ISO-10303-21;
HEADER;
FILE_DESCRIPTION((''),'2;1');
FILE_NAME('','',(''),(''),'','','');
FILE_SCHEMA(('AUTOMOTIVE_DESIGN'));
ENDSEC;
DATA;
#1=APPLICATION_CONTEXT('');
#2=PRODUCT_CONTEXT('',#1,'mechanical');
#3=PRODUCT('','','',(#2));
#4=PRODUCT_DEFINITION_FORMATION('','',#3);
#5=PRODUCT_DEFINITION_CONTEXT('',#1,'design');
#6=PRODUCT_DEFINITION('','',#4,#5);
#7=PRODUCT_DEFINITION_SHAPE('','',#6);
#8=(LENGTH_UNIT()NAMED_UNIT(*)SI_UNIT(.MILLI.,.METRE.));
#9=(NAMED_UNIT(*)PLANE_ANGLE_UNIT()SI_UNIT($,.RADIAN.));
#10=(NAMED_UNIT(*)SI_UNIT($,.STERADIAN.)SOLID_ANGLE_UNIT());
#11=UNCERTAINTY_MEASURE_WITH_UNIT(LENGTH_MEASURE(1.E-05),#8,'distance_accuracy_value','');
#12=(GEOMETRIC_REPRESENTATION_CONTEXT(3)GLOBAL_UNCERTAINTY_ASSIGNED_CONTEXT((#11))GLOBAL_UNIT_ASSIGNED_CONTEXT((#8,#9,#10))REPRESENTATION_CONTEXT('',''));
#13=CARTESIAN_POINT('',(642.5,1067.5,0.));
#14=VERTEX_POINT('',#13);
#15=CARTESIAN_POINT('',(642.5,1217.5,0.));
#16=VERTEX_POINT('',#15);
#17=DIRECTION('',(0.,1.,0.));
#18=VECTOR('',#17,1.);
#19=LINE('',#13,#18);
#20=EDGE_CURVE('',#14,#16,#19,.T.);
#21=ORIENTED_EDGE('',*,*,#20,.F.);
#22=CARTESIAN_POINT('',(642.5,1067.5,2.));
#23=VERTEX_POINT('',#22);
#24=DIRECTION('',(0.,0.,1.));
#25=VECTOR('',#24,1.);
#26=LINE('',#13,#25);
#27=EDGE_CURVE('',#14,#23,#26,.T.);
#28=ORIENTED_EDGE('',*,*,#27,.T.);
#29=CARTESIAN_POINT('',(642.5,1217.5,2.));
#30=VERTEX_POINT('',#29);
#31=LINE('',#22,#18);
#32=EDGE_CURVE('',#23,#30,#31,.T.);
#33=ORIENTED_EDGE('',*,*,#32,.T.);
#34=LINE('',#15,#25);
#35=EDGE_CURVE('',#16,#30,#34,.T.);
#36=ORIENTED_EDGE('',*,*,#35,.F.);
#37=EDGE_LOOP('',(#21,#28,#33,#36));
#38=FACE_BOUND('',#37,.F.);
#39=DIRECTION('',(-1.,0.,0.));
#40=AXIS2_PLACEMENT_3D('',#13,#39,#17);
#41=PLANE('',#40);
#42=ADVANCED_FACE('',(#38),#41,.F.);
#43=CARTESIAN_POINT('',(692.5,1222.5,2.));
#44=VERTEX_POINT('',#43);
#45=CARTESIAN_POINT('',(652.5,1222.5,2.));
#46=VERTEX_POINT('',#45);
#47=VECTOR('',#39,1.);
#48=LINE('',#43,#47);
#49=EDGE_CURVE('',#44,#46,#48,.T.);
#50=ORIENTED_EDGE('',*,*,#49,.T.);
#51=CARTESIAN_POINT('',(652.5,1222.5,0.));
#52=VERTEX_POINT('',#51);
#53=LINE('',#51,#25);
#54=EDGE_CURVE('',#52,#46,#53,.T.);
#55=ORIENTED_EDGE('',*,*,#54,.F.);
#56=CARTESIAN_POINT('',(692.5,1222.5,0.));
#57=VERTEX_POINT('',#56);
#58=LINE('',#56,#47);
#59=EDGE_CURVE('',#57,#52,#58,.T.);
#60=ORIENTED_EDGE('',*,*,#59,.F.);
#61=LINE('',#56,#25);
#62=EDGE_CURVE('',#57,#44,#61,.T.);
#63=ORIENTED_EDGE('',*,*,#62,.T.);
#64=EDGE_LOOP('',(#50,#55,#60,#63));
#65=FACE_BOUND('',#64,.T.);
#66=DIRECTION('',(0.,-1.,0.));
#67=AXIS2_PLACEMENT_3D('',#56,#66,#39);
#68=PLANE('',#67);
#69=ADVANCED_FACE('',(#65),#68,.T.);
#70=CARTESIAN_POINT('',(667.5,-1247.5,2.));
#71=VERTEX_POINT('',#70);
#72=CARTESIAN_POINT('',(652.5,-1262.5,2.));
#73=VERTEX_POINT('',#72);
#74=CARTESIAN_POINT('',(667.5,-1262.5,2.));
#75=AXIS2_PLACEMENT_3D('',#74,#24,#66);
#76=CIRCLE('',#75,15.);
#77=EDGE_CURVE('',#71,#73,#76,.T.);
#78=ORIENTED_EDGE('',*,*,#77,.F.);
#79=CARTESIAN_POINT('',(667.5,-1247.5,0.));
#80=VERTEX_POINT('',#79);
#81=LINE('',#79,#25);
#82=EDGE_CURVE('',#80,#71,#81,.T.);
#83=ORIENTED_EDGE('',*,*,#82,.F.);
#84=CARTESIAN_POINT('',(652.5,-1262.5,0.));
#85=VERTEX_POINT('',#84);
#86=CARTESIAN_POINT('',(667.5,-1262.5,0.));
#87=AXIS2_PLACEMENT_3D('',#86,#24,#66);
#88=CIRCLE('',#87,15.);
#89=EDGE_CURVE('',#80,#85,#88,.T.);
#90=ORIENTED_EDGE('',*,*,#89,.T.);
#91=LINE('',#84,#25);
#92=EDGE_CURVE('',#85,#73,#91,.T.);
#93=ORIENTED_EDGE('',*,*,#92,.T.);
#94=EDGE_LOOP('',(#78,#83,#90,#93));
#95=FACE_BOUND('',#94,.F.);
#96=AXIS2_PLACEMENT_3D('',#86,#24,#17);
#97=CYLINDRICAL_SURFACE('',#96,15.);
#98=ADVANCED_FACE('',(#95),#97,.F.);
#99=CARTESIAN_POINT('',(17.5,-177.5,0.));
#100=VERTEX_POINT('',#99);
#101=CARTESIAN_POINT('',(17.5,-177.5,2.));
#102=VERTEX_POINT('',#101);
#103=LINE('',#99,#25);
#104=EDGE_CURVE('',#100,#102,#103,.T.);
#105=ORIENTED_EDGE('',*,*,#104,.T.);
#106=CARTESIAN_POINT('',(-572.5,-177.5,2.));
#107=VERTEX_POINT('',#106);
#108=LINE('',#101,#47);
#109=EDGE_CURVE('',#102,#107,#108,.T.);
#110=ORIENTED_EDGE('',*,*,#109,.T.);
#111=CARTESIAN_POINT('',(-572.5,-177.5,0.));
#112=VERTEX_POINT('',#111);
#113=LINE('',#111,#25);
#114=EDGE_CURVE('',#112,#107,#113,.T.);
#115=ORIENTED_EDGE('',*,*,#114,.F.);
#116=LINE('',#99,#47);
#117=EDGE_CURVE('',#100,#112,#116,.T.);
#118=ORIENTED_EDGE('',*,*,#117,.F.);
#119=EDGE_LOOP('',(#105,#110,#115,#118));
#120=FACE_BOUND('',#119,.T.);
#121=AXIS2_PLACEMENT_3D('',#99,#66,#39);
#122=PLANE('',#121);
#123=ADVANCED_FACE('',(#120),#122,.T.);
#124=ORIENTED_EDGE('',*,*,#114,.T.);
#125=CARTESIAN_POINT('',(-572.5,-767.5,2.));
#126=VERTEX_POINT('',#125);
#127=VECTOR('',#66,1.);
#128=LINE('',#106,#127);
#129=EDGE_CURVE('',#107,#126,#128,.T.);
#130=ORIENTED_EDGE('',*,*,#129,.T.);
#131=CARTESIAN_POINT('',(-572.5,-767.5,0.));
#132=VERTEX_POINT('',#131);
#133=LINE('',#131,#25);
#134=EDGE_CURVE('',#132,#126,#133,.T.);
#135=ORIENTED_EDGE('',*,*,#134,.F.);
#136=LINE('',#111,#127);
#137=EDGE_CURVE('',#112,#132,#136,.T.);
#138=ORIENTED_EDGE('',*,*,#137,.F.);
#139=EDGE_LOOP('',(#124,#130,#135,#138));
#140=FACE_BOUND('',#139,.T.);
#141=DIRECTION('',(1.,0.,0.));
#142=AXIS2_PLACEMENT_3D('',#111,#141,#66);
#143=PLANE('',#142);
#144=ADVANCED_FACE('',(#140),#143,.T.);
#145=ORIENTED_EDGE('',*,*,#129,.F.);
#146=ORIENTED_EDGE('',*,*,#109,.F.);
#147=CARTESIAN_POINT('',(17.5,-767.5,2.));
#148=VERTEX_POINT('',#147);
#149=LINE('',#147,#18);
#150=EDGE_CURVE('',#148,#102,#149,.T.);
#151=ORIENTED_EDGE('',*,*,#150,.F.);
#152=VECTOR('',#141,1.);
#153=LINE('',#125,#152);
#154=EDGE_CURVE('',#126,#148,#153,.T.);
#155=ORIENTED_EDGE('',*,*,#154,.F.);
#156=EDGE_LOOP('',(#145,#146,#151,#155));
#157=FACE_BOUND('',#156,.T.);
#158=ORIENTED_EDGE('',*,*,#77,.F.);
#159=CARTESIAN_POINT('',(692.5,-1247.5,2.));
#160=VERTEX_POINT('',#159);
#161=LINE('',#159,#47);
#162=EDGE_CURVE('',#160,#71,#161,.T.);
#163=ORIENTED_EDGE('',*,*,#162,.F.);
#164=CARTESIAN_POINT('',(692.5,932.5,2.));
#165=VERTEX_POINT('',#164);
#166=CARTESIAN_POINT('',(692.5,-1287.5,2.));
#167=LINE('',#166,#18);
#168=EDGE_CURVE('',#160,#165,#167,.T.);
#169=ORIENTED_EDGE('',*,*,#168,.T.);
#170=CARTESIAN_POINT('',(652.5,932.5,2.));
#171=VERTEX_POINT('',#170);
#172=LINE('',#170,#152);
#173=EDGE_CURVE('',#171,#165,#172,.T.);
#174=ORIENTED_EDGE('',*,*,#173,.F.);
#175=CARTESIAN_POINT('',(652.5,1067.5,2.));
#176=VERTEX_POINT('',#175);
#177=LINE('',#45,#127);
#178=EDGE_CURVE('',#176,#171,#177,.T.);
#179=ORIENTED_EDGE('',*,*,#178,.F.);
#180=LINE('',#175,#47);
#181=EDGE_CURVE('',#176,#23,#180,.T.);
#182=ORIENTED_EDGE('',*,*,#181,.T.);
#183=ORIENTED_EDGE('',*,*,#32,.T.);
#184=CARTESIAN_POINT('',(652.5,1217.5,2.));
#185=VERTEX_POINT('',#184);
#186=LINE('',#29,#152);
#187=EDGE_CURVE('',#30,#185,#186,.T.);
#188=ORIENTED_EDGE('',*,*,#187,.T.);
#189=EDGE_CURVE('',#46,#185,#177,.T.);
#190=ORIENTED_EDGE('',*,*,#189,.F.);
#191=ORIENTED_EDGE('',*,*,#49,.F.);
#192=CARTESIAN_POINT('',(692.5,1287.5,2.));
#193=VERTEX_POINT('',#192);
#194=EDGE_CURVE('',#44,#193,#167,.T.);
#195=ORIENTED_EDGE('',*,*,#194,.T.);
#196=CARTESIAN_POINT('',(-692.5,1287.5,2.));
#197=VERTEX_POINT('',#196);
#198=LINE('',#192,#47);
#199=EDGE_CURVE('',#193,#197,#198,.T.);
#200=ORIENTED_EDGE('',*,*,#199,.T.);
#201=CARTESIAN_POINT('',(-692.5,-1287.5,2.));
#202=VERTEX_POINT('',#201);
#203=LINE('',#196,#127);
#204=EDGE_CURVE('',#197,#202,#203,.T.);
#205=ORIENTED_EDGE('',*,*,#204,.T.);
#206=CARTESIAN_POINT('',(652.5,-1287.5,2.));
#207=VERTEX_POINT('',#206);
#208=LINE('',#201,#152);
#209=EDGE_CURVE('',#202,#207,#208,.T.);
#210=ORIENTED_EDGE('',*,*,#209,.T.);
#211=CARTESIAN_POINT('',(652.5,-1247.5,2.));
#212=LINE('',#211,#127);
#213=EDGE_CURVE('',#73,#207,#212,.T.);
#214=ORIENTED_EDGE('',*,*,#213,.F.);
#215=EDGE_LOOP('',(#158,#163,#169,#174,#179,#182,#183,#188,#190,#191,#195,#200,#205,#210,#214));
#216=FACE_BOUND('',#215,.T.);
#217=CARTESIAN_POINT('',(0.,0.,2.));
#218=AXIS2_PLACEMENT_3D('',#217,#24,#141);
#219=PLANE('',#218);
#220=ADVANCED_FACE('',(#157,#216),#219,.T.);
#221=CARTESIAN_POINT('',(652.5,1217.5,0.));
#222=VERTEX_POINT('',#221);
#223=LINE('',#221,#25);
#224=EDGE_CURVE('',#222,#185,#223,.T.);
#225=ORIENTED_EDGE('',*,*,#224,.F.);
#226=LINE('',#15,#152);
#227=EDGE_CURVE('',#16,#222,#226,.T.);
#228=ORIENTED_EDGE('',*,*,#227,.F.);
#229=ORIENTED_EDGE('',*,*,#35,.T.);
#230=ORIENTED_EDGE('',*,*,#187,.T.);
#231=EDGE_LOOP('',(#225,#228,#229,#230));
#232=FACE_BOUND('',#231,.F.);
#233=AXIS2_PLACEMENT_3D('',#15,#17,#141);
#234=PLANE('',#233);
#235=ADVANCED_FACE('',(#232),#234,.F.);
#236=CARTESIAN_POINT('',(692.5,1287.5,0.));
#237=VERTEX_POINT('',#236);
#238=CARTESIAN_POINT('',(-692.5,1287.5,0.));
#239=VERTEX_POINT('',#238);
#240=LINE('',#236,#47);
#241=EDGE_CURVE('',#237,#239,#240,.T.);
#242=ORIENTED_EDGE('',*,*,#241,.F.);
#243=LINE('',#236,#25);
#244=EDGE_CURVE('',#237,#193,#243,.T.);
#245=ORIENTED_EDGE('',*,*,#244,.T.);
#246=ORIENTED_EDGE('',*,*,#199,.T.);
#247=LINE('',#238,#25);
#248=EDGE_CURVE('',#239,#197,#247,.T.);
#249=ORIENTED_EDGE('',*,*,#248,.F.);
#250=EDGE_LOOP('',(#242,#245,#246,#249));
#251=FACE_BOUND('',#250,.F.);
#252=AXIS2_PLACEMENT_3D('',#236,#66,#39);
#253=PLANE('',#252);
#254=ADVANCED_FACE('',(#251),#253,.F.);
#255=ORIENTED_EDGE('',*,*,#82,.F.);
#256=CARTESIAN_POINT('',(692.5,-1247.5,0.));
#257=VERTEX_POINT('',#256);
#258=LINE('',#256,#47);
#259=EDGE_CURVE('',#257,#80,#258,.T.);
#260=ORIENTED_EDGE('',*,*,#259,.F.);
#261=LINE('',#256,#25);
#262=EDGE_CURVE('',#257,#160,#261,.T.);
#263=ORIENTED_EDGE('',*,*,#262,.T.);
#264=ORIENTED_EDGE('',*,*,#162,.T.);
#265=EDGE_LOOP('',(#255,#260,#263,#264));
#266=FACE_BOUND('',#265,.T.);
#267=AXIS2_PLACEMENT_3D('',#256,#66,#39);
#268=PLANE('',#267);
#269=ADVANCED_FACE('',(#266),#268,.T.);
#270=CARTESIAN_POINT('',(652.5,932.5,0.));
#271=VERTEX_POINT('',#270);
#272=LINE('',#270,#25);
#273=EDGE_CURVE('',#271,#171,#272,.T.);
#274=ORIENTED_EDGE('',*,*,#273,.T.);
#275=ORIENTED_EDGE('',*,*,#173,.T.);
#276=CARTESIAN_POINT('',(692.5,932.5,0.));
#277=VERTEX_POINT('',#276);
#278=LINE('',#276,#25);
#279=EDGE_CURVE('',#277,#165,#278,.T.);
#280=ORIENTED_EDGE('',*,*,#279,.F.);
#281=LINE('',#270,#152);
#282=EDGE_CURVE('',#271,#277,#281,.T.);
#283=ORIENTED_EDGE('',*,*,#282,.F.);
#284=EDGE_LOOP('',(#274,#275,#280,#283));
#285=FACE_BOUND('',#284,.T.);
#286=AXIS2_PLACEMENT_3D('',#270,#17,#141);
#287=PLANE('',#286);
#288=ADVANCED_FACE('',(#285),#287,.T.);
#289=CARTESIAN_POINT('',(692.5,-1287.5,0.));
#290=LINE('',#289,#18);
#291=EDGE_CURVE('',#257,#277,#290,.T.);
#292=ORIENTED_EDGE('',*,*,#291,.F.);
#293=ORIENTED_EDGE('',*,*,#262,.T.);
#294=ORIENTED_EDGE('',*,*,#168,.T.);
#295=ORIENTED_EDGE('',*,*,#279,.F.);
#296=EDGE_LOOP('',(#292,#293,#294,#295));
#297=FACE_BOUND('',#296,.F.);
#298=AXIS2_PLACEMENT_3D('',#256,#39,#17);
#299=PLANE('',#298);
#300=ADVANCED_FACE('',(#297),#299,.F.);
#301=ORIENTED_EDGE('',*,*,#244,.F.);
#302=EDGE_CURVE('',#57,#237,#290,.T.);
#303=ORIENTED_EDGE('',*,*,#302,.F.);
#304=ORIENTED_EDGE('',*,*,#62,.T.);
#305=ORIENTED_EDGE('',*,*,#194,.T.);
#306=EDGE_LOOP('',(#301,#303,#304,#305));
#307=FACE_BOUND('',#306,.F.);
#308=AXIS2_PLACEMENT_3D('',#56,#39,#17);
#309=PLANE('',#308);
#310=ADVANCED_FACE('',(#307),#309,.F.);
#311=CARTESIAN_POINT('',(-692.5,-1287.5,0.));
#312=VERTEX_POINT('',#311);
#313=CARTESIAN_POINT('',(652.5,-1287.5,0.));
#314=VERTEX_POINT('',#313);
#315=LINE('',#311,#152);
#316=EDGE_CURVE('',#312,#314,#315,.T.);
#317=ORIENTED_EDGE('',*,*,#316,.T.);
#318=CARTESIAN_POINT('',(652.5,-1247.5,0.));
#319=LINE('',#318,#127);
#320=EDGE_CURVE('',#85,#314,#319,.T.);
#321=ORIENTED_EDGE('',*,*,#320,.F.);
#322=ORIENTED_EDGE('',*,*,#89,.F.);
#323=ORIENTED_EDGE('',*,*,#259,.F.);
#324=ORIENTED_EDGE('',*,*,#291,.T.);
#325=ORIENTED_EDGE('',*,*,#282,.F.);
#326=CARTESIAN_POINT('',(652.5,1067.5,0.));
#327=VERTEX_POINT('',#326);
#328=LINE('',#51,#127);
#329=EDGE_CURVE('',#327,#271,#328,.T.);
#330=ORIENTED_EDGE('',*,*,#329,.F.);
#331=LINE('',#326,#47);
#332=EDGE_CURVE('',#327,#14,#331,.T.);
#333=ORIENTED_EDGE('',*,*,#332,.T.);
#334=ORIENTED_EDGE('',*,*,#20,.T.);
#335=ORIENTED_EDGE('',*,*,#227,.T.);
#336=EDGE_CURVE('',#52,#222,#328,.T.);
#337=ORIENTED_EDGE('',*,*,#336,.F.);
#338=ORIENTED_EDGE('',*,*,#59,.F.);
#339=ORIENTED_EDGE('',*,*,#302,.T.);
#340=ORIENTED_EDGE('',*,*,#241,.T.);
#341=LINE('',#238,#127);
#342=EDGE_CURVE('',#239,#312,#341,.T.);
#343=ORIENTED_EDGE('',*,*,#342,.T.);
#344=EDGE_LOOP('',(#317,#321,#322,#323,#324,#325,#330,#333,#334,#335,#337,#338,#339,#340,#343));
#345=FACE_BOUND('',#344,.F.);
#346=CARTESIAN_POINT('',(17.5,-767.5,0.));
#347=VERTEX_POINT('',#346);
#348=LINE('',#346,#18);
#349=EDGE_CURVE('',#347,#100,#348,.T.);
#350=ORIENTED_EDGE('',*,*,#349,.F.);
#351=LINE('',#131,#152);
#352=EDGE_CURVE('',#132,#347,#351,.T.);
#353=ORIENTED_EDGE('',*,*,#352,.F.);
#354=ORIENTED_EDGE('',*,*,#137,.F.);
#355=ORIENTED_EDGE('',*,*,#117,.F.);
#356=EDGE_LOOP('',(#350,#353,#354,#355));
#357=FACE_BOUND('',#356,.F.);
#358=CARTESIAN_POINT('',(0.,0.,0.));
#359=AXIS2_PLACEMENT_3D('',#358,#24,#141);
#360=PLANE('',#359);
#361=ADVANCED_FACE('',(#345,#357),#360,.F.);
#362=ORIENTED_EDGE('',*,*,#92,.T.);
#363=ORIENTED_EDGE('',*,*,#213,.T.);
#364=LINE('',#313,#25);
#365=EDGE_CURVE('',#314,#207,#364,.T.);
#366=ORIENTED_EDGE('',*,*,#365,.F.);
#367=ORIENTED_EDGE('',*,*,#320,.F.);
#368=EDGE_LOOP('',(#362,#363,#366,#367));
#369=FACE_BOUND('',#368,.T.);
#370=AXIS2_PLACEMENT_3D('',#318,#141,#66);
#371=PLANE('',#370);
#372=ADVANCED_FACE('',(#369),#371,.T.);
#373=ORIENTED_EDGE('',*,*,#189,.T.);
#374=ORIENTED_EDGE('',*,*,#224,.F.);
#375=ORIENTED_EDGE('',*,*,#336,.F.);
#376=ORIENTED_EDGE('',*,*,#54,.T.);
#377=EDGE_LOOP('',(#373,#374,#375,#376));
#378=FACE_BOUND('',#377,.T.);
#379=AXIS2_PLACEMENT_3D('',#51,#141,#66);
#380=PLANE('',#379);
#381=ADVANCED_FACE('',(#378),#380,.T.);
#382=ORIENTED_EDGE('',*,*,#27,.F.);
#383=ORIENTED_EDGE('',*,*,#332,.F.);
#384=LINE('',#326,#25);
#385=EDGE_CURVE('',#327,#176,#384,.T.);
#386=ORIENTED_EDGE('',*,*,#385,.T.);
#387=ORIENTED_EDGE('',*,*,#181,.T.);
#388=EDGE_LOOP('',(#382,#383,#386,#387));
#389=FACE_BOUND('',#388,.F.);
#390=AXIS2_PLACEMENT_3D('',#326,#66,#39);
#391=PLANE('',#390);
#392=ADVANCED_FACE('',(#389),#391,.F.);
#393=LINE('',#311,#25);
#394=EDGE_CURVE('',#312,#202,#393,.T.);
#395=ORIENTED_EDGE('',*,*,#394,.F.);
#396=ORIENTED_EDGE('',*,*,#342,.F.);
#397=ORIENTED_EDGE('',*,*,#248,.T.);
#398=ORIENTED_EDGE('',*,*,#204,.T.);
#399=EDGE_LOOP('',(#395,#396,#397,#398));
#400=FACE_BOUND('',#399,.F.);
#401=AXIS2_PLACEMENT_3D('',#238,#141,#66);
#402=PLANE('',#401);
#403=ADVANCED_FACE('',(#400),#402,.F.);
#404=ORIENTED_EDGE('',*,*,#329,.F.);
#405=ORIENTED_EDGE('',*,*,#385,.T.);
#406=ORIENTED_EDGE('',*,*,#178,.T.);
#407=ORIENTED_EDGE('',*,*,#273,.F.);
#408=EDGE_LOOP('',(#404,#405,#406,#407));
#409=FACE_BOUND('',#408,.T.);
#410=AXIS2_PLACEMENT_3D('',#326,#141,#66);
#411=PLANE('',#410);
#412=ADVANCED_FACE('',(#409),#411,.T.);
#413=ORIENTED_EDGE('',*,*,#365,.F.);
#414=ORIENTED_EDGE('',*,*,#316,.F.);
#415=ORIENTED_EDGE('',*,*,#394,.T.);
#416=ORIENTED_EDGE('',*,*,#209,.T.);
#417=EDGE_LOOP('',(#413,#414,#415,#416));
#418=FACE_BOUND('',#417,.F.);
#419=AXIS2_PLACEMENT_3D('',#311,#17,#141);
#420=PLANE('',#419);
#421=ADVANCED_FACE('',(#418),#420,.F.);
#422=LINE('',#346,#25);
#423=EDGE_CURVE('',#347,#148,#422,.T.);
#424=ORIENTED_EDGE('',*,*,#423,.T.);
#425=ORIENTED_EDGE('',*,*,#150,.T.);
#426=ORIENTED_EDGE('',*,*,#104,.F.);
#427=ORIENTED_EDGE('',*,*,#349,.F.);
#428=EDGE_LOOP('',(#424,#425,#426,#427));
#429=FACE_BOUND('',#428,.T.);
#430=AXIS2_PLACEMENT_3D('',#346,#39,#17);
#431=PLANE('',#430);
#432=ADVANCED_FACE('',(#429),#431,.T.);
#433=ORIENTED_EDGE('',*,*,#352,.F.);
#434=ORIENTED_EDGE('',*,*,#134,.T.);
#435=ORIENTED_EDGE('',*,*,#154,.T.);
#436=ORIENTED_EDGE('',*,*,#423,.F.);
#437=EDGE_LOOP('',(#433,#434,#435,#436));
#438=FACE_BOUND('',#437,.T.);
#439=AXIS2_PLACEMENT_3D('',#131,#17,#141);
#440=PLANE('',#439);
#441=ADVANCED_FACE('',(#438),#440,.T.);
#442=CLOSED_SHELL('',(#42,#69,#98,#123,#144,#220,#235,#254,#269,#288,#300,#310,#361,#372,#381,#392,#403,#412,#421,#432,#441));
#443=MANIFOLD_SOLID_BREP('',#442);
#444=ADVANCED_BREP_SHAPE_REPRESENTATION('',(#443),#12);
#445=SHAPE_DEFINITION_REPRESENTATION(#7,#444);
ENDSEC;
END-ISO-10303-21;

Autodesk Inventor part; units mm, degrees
ref_plane "YZ Plane" through (0, 0, 0) normal (1, 0, 0) x (0, 1, 0)
ref_plane "XZ Plane" through (0, 0, 0) normal (0, 1, 0) x (-1, 0, 0)
ref_plane "XY Plane" through (0, 0, 0) normal (0, 0, 1) x (1, 0, 0)
sketch "Sketch1" plane through (0, 0, 0) normal (0, 0, 1) x (1, 0, 0)
  line L0 (-692.5, -1287.5) -> (692.5, -1287.5)
  line L1 (692.5, -1287.5) -> (692.5, 1287.5)
  line L2 (692.5, 1287.5) -> (-692.5, 1287.5)
  line L3 (-692.5, 1287.5) -> (-692.5, -1287.5)
  line L4 (-692.5, -1287.5) -> (692.5, 1287.5) construction
  line L5 (692.5, -1287.5) -> (-692.5, 1287.5) construction
  line L6 (692.5, -1247.5) -> (652.5, -1247.5)
  line L7 (652.5, -1247.5) -> (652.5, -1287.5)
  line L8 (692.5, 1222.5) -> (652.5, 1222.5)
  line L9 (652.5, 1222.5) -> (652.5, 932.5)
  line L10 (652.5, 932.5) -> (692.5, 932.5)
  line L11 (692.5, 932.5) -> (692.5, 1222.5)
  line L12 (652.5, 1067.5) -> (642.5, 1067.5)
  line L13 (642.5, 1067.5) -> (642.5, 1217.5)
  line L14 (642.5, 1217.5) -> (652.5, 1217.5)
  line L15 (-572.5, -767.5) -> (17.5, -767.5)
  line L16 (17.5, -767.5) -> (17.5, -177.5)
  line L17 (17.5, -177.5) -> (-572.5, -177.5)
  line L18 (-572.5, -177.5) -> (-572.5, -767.5)
  point P0 (0, 0)
  dimension "d154" = 1385
  dimension "d155" = 2575
  dimension "d157" = 40
  dimension "d159" = 290
  dimension "d161" = 40
  dimension "d162" = 2220
  dimension "d163" = 10
  dimension "d164" = 150
  dimension "d165" = 5
  dimension "d166" = 590
  dimension "d167" = 590
  dimension "d168" = 675
  dimension "d169" = 520
extrude "Plate5" add sketch "Sketch1" along normal blind 2 contours L3 L2 L1 L8 L9 L14 L13 L12 L10 L6 L7 L0
fillet "Corner Round1" radius 15 1 edges at (652.5, -1247.5, 1)
properties part number "PNS-0111 floor sheet 2" material "Stainless Steel"
